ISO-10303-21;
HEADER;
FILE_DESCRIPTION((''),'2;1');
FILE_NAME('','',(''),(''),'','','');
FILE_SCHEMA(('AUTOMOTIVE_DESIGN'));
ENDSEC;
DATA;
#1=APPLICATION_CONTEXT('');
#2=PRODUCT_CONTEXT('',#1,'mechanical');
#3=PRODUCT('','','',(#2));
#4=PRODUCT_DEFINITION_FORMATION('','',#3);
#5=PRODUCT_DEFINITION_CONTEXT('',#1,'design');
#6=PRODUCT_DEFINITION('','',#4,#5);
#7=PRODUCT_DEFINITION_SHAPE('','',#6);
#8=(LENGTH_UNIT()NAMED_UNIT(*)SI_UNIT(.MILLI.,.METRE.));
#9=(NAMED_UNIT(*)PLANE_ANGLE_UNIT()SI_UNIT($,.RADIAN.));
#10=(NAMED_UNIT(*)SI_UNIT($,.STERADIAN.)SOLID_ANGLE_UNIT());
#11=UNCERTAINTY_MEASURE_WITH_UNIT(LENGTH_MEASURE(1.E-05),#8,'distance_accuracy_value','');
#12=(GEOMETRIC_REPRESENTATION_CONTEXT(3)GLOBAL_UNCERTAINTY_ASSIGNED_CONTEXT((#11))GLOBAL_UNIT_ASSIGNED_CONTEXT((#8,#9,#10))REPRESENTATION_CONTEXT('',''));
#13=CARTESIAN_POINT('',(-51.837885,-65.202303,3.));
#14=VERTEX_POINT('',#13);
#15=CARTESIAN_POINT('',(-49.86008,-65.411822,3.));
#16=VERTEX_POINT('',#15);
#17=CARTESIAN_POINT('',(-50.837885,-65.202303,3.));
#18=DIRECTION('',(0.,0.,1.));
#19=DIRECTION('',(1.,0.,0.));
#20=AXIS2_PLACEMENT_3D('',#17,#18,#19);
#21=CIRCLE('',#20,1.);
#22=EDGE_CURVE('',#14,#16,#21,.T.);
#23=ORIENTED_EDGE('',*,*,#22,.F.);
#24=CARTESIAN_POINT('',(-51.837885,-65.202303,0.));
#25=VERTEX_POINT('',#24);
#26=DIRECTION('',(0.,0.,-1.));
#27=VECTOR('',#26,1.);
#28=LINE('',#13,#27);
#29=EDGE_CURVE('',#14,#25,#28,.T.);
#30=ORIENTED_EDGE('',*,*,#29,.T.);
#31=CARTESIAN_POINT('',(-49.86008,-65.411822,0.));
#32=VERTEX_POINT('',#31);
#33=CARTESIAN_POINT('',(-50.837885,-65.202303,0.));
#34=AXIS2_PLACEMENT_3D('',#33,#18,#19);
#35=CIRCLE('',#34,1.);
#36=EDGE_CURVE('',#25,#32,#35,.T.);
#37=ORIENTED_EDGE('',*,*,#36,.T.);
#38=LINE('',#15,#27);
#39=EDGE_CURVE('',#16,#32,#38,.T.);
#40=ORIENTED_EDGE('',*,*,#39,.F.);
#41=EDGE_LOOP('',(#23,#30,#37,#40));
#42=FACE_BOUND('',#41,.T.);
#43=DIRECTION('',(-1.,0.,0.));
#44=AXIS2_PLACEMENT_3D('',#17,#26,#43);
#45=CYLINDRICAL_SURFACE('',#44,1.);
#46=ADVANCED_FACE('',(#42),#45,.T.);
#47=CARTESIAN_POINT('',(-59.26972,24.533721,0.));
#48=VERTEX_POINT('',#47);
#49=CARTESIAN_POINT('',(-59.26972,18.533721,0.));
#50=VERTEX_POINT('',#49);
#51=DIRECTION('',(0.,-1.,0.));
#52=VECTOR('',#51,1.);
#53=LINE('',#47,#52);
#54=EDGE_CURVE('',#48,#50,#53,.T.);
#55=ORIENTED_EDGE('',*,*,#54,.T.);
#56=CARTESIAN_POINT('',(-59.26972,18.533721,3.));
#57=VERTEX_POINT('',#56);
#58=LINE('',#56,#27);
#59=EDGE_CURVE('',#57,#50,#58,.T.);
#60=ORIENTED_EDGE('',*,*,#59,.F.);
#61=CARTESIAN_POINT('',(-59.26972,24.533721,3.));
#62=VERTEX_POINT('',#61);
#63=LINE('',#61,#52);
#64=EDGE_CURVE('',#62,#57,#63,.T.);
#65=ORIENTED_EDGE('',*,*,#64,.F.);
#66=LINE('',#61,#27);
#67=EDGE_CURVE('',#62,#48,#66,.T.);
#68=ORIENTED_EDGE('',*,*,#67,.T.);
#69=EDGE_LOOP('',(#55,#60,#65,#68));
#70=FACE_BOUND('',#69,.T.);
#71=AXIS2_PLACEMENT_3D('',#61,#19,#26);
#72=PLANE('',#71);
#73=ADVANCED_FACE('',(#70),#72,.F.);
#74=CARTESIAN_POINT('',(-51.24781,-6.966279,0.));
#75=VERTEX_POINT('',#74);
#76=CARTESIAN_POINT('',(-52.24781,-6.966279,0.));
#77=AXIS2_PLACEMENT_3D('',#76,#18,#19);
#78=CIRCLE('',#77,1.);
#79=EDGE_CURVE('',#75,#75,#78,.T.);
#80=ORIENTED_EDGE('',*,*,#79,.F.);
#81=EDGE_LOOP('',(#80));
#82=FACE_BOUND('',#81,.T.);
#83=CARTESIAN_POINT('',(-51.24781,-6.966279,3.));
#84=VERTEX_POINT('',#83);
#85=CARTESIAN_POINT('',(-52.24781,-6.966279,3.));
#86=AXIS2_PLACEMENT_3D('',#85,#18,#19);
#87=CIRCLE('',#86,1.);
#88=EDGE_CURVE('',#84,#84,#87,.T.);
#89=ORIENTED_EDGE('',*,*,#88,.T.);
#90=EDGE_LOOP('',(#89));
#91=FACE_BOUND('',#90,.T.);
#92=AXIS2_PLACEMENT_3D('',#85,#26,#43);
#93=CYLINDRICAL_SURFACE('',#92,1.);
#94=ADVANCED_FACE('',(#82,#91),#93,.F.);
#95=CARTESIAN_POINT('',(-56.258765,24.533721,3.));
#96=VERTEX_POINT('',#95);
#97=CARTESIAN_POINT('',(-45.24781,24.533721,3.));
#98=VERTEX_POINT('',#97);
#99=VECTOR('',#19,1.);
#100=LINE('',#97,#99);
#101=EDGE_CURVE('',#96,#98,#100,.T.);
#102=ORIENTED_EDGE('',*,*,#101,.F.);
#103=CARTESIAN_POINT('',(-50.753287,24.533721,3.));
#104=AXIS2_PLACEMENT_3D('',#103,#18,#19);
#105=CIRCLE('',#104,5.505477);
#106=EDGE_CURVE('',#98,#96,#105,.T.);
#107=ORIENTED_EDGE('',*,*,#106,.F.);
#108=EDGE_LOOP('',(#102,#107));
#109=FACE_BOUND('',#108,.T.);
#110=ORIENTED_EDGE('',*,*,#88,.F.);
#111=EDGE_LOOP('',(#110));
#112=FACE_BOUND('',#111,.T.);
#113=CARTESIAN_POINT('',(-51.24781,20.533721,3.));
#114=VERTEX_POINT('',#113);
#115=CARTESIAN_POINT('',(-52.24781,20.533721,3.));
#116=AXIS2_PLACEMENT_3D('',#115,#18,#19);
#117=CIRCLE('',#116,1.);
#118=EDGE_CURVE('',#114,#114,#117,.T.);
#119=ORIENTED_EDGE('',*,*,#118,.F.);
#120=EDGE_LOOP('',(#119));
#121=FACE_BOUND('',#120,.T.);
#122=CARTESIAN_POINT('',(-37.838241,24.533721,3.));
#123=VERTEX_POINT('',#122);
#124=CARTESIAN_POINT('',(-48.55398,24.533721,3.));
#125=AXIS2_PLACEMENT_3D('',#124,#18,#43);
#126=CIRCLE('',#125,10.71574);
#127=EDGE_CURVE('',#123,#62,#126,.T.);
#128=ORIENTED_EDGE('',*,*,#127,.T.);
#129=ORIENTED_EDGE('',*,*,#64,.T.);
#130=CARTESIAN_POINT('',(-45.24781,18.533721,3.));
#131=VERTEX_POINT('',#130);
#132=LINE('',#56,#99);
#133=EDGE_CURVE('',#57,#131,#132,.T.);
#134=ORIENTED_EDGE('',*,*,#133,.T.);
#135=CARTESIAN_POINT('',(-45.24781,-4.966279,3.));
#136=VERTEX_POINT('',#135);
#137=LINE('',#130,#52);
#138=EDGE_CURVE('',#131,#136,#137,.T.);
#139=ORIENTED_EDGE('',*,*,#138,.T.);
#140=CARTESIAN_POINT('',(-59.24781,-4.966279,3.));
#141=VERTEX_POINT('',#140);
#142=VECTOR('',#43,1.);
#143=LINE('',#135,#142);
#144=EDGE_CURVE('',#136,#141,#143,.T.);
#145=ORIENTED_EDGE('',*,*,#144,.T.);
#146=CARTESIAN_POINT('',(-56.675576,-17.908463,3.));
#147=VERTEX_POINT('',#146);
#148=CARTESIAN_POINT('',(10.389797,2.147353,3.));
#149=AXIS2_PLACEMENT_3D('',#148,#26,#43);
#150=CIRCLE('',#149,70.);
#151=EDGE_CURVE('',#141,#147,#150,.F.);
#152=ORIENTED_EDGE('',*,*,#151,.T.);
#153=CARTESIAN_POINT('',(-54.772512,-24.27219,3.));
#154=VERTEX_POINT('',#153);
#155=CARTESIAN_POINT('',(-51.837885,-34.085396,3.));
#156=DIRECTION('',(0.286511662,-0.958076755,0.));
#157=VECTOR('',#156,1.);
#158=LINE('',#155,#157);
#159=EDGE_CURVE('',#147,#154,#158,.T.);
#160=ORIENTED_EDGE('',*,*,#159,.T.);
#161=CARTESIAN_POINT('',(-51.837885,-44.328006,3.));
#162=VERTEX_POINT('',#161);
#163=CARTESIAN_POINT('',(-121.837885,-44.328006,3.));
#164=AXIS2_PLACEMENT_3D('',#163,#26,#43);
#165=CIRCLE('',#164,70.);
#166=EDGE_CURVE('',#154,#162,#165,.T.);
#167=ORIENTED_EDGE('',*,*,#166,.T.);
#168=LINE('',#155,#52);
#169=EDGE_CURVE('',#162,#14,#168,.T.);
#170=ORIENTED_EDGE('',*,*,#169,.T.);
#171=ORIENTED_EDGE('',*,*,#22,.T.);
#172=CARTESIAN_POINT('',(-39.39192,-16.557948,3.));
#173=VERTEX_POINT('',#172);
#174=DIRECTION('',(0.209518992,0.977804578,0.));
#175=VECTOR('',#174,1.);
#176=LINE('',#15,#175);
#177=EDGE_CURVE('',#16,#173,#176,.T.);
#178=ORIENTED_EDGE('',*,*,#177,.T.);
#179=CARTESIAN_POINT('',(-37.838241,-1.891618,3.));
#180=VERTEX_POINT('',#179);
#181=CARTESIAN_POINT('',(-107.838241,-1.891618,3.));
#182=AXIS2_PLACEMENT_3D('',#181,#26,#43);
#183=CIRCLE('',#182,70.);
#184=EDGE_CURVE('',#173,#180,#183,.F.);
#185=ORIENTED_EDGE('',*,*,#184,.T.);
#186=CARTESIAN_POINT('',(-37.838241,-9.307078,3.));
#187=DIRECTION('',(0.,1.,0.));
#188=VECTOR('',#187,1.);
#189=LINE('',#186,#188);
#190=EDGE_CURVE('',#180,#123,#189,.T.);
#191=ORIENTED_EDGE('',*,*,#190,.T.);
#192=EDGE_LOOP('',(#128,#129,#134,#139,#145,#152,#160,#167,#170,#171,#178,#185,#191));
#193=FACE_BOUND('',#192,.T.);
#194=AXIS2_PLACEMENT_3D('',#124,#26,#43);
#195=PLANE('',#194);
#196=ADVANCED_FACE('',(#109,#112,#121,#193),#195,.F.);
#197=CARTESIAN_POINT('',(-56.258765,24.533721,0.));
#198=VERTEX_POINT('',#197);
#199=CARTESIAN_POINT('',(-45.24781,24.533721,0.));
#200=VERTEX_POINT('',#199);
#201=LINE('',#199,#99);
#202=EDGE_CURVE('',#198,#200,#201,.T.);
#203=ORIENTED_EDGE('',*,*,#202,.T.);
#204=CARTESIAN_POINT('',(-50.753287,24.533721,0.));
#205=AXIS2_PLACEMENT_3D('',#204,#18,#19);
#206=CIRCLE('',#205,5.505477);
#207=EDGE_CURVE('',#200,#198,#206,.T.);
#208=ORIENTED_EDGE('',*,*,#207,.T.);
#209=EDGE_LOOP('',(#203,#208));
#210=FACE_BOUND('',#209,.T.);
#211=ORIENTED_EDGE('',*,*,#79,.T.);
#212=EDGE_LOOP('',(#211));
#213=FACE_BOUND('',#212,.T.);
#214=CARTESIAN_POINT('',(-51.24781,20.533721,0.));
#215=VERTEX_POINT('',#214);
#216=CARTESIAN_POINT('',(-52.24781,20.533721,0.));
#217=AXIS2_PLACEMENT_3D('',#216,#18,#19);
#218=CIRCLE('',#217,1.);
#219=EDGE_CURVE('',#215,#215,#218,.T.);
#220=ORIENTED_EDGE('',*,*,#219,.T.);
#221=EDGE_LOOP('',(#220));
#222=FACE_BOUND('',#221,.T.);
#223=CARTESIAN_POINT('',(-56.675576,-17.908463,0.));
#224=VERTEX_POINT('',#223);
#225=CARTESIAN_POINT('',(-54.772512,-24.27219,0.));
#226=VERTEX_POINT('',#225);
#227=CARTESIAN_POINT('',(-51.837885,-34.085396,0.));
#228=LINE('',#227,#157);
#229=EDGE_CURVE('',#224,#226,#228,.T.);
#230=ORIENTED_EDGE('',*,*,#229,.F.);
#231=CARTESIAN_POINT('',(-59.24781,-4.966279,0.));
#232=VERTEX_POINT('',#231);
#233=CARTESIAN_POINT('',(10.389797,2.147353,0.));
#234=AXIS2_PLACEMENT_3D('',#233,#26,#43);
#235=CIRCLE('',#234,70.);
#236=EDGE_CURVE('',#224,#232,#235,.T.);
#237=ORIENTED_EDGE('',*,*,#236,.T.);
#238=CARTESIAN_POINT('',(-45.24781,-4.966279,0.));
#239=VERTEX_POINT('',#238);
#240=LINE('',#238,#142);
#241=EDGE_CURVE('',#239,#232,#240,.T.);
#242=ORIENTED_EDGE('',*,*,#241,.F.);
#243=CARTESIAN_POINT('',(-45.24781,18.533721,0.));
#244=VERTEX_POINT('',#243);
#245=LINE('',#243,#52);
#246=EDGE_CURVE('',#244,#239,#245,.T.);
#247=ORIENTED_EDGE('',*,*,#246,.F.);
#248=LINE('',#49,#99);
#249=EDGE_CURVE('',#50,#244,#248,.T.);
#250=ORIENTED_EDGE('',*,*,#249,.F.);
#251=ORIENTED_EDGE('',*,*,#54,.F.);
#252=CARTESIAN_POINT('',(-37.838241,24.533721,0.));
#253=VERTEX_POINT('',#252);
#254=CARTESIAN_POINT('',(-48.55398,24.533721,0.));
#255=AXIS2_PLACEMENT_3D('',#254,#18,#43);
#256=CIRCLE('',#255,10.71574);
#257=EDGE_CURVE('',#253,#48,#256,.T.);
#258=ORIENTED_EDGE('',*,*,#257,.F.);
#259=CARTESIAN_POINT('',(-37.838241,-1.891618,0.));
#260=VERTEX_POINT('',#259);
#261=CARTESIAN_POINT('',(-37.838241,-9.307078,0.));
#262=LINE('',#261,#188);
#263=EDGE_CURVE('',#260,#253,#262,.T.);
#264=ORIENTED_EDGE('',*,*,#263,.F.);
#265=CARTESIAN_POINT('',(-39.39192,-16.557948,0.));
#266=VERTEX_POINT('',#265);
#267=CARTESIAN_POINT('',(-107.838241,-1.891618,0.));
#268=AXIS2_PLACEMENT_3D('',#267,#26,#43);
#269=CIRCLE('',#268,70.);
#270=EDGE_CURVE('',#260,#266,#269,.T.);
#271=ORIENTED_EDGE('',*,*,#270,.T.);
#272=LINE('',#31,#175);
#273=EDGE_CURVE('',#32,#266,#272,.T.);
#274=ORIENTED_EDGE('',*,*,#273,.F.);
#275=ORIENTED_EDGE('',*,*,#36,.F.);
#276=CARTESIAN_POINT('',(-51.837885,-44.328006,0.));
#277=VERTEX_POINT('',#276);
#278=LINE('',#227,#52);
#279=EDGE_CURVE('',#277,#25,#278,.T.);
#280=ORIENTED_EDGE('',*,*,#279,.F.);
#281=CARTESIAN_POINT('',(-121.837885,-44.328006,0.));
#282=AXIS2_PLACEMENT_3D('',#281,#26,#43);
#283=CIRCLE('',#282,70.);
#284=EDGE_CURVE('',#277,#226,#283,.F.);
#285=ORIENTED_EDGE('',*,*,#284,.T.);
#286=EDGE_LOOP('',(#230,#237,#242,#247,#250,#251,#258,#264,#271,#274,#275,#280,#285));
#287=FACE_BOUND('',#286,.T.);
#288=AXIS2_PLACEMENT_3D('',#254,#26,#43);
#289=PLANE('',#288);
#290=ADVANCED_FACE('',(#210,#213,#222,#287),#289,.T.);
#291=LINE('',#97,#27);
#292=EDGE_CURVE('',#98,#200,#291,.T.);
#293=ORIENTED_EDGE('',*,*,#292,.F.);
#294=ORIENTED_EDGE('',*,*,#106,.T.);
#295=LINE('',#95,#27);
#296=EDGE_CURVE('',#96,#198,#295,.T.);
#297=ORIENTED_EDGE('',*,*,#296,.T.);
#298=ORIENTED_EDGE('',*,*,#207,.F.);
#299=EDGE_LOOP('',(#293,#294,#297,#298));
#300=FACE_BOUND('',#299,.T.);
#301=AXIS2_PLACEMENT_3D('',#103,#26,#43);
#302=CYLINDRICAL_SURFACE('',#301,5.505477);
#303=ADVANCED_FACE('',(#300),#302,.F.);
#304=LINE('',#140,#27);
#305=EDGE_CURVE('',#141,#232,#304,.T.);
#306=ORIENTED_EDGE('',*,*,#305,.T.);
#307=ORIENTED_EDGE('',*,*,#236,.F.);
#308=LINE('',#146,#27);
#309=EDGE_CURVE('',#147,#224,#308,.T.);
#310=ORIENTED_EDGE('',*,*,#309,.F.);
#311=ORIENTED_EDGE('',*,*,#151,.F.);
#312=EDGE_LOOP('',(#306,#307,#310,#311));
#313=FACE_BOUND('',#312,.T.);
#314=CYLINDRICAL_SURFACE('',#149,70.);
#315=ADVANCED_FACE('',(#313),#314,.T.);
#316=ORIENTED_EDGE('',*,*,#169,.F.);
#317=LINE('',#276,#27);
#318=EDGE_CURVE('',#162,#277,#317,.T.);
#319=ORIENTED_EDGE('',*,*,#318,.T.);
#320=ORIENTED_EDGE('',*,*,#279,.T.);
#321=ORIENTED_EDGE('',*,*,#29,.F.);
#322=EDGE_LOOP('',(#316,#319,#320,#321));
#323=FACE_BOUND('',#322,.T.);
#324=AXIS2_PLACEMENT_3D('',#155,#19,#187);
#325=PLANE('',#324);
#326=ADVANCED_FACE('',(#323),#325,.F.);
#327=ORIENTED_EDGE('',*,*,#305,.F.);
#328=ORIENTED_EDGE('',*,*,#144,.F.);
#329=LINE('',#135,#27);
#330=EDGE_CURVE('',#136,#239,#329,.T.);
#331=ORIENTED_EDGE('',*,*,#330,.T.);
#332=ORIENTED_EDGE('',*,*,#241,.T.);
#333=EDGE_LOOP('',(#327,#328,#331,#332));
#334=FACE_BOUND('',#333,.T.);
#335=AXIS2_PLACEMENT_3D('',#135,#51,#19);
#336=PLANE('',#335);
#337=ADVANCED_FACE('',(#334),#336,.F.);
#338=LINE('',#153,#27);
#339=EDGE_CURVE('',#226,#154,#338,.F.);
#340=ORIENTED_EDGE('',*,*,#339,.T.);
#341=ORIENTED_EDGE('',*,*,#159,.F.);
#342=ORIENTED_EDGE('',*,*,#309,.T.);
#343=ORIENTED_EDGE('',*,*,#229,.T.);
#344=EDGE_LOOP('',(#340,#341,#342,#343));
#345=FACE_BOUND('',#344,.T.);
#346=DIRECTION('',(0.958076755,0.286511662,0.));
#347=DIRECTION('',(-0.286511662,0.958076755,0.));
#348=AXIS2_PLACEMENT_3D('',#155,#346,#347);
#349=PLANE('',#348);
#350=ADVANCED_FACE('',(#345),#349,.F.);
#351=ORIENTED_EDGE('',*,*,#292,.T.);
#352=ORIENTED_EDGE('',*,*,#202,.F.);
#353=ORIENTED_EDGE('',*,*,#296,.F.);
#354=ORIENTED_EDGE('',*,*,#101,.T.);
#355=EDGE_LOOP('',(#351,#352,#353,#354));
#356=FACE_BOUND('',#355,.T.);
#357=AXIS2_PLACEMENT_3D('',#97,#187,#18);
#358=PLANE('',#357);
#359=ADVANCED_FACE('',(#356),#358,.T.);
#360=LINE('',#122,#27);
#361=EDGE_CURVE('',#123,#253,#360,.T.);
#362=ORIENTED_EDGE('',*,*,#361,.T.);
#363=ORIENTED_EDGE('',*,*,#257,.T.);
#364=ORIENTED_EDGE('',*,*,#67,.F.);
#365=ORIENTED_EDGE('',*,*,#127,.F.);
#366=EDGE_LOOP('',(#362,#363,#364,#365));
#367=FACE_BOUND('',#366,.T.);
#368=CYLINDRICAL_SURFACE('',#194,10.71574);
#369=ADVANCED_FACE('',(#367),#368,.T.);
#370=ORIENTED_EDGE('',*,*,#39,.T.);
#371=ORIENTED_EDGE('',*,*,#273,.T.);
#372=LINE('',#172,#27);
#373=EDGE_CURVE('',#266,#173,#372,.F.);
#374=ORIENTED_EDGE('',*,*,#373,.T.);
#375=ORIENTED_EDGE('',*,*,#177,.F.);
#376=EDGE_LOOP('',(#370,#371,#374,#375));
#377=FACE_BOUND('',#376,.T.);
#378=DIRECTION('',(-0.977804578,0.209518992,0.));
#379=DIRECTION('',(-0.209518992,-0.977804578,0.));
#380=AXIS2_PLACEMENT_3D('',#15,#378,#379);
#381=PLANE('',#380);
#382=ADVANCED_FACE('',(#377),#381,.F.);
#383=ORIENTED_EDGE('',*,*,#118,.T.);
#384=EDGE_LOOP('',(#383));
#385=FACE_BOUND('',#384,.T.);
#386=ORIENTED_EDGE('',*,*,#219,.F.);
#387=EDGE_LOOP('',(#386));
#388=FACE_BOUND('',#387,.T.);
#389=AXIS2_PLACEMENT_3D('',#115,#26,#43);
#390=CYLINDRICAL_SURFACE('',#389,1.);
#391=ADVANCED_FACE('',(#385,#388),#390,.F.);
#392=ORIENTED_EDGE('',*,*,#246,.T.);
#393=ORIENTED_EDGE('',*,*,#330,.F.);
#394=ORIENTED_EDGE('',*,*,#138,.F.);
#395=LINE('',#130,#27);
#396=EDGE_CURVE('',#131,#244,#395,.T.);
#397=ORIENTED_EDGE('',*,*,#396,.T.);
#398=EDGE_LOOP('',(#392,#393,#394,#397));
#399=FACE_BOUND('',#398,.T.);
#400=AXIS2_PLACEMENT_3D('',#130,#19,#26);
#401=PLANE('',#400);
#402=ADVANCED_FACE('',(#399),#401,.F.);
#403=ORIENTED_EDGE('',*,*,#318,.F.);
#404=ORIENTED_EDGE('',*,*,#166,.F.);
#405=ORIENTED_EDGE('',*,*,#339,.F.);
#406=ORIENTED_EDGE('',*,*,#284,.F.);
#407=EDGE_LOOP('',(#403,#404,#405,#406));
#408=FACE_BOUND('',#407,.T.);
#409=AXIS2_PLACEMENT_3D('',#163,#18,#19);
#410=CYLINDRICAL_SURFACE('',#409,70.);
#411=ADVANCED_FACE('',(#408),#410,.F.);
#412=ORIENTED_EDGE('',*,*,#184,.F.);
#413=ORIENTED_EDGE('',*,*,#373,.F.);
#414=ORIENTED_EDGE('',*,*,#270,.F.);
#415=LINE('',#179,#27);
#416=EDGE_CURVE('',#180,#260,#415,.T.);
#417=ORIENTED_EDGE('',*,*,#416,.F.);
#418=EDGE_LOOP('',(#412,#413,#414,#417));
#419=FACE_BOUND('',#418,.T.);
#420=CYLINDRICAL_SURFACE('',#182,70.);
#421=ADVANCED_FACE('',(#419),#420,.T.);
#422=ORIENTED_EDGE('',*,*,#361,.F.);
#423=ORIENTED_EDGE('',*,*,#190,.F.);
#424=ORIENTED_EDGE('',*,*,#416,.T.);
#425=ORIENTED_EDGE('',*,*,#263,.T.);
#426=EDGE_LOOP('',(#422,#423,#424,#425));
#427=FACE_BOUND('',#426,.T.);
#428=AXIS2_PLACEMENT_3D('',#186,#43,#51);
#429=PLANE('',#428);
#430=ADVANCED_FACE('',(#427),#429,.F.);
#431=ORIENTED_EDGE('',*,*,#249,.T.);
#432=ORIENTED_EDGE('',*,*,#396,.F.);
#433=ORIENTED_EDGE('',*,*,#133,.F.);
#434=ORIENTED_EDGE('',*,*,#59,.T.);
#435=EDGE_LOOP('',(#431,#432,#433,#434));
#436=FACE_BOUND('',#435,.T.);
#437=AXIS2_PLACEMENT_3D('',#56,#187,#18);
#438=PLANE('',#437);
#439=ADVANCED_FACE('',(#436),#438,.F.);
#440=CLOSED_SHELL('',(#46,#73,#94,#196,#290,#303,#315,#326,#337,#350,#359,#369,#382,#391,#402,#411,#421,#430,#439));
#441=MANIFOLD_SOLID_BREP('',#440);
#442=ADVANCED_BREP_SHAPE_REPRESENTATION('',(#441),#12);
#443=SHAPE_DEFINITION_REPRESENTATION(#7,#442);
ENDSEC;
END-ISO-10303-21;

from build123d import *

# Parameters (mm, degrees)
SKETCH1_R           = 1
BOSS_EXTRUDE1_DEPTH = 3
FILLET_2_R          = 70


with BuildPart() as part:
    # Sketch1 → Boss-Extrude1 (new body)
    with BuildSketch(Plane.XY):
        with BuildLine():
            Line((-59.269719731, 24.533720681), (-59.269719731, 18.533720681))
            Line((-59.269719731, 18.533720681), (-45.247809755, 18.533720681))
            Line((-45.247809755, 18.533720681), (-45.247809755, -4.966279319))
            Line((-45.247809755, -4.966279319), (-59.247809755, -4.966279319))
            Line((-59.247809755, -4.966279319), (-59.247809755, -9.307077777))
            Line((-59.247809755, -9.307077777), (-51.83788451, -34.085396001))
            Line((-51.83788451, -34.085396001), (-51.83788451, -65.202303041))
            ThreePointArc((-51.83788451, -65.202303041), (-50.943230184, -66.196738704), (-49.860079932, -65.411822033))
            Line((-49.860079932, -65.411822033), (-37.838240661, -9.307077777))
            Line((-37.838240661, -9.307077777), (-37.838240661, 24.533720681))
            ThreePointArc((-37.838240661, 24.533720681), (-48.553980196, 35.249460216), (-59.269719731, 24.533720681))
        make_face()
        with Locations((-52.247809755, 20.533720681)):
            Circle(SKETCH1_R, mode=Mode.SUBTRACT)
        with Locations((-52.247809755, -6.966279319)):
            Circle(SKETCH1_R, mode=Mode.SUBTRACT)
        with BuildLine():
            Line((-45.247809755, 24.533720681), (-56.258764743, 24.533720681))
            ThreePointArc((-56.258764743, 24.533720681), (-50.753287249, 30.039198175), (-45.247809755, 24.533720681))
        make_face(mode=Mode.SUBTRACT)
    extrude(amount=BOSS_EXTRUDE1_DEPTH)

    # Скругление2
    # the kernel refuses this fillet: 70 mm, written as the material it adds along each edge
    with BuildSketch(Plane(origin=(-51.83788451, -34.085396001, 0), x_dir=(-0.28651166180092774, 0.9580767545724459, 0), z_dir=(0, 0, 1))) as fillet_2_piece_1:
        with BuildLine():
            CenterArc((FILLET_2_R * 0.146322998387, FILLET_2_R), FILLET_2_R, 253.350770917, 16.649229083)
            Line((-FILLET_2_R * 0.140188663414, FILLET_2_R * 0.0419232454276), (0, 0))
            Line((0, 0), (FILLET_2_R * 0.146322998387, 0))
        make_face()
    extrude(amount=3)
    # the kernel refuses this fillet: 70 mm, written as the material it takes off along each edge
    with BuildSketch(Plane(origin=(-59.247809755, -9.307077777, -22.444406255), x_dir=(0, 1, 0), z_dir=(0, 0, 1))) as fillet_2_2_piece_1:
        with BuildLine():
            CenterArc((11.454430765, -69.637606474), FILLET_2_R, 95.832656056, 10.816573027)
            Line((-8.601385561, -2.572233654), (0, 0))
            Line((0, 0), (4.340798458, 0))
        make_face()
    extrude(amount=47.88881251, mode=Mode.SUBTRACT)
    with BuildSketch(Plane(origin=(-37.838240661, -9.307077777, -18.538648377), x_dir=(0, 1, 0), z_dir=(0, 0, 1))) as fillet_2_2_piece_2:
        with BuildLine():
            CenterArc((FILLET_2_R * 0.10593513358, FILLET_2_R), FILLET_2_R, 257.905834548, 12.094165452)
            Line((-FILLET_2_R * 0.103583858541, FILLET_2_R * 0.0221954224179), (0, 0))
            Line((0, 0), (FILLET_2_R * 0.10593513358, 0))
        make_face()
    extrude(amount=40.077296753, mode=Mode.SUBTRACT)


solid = part.part
